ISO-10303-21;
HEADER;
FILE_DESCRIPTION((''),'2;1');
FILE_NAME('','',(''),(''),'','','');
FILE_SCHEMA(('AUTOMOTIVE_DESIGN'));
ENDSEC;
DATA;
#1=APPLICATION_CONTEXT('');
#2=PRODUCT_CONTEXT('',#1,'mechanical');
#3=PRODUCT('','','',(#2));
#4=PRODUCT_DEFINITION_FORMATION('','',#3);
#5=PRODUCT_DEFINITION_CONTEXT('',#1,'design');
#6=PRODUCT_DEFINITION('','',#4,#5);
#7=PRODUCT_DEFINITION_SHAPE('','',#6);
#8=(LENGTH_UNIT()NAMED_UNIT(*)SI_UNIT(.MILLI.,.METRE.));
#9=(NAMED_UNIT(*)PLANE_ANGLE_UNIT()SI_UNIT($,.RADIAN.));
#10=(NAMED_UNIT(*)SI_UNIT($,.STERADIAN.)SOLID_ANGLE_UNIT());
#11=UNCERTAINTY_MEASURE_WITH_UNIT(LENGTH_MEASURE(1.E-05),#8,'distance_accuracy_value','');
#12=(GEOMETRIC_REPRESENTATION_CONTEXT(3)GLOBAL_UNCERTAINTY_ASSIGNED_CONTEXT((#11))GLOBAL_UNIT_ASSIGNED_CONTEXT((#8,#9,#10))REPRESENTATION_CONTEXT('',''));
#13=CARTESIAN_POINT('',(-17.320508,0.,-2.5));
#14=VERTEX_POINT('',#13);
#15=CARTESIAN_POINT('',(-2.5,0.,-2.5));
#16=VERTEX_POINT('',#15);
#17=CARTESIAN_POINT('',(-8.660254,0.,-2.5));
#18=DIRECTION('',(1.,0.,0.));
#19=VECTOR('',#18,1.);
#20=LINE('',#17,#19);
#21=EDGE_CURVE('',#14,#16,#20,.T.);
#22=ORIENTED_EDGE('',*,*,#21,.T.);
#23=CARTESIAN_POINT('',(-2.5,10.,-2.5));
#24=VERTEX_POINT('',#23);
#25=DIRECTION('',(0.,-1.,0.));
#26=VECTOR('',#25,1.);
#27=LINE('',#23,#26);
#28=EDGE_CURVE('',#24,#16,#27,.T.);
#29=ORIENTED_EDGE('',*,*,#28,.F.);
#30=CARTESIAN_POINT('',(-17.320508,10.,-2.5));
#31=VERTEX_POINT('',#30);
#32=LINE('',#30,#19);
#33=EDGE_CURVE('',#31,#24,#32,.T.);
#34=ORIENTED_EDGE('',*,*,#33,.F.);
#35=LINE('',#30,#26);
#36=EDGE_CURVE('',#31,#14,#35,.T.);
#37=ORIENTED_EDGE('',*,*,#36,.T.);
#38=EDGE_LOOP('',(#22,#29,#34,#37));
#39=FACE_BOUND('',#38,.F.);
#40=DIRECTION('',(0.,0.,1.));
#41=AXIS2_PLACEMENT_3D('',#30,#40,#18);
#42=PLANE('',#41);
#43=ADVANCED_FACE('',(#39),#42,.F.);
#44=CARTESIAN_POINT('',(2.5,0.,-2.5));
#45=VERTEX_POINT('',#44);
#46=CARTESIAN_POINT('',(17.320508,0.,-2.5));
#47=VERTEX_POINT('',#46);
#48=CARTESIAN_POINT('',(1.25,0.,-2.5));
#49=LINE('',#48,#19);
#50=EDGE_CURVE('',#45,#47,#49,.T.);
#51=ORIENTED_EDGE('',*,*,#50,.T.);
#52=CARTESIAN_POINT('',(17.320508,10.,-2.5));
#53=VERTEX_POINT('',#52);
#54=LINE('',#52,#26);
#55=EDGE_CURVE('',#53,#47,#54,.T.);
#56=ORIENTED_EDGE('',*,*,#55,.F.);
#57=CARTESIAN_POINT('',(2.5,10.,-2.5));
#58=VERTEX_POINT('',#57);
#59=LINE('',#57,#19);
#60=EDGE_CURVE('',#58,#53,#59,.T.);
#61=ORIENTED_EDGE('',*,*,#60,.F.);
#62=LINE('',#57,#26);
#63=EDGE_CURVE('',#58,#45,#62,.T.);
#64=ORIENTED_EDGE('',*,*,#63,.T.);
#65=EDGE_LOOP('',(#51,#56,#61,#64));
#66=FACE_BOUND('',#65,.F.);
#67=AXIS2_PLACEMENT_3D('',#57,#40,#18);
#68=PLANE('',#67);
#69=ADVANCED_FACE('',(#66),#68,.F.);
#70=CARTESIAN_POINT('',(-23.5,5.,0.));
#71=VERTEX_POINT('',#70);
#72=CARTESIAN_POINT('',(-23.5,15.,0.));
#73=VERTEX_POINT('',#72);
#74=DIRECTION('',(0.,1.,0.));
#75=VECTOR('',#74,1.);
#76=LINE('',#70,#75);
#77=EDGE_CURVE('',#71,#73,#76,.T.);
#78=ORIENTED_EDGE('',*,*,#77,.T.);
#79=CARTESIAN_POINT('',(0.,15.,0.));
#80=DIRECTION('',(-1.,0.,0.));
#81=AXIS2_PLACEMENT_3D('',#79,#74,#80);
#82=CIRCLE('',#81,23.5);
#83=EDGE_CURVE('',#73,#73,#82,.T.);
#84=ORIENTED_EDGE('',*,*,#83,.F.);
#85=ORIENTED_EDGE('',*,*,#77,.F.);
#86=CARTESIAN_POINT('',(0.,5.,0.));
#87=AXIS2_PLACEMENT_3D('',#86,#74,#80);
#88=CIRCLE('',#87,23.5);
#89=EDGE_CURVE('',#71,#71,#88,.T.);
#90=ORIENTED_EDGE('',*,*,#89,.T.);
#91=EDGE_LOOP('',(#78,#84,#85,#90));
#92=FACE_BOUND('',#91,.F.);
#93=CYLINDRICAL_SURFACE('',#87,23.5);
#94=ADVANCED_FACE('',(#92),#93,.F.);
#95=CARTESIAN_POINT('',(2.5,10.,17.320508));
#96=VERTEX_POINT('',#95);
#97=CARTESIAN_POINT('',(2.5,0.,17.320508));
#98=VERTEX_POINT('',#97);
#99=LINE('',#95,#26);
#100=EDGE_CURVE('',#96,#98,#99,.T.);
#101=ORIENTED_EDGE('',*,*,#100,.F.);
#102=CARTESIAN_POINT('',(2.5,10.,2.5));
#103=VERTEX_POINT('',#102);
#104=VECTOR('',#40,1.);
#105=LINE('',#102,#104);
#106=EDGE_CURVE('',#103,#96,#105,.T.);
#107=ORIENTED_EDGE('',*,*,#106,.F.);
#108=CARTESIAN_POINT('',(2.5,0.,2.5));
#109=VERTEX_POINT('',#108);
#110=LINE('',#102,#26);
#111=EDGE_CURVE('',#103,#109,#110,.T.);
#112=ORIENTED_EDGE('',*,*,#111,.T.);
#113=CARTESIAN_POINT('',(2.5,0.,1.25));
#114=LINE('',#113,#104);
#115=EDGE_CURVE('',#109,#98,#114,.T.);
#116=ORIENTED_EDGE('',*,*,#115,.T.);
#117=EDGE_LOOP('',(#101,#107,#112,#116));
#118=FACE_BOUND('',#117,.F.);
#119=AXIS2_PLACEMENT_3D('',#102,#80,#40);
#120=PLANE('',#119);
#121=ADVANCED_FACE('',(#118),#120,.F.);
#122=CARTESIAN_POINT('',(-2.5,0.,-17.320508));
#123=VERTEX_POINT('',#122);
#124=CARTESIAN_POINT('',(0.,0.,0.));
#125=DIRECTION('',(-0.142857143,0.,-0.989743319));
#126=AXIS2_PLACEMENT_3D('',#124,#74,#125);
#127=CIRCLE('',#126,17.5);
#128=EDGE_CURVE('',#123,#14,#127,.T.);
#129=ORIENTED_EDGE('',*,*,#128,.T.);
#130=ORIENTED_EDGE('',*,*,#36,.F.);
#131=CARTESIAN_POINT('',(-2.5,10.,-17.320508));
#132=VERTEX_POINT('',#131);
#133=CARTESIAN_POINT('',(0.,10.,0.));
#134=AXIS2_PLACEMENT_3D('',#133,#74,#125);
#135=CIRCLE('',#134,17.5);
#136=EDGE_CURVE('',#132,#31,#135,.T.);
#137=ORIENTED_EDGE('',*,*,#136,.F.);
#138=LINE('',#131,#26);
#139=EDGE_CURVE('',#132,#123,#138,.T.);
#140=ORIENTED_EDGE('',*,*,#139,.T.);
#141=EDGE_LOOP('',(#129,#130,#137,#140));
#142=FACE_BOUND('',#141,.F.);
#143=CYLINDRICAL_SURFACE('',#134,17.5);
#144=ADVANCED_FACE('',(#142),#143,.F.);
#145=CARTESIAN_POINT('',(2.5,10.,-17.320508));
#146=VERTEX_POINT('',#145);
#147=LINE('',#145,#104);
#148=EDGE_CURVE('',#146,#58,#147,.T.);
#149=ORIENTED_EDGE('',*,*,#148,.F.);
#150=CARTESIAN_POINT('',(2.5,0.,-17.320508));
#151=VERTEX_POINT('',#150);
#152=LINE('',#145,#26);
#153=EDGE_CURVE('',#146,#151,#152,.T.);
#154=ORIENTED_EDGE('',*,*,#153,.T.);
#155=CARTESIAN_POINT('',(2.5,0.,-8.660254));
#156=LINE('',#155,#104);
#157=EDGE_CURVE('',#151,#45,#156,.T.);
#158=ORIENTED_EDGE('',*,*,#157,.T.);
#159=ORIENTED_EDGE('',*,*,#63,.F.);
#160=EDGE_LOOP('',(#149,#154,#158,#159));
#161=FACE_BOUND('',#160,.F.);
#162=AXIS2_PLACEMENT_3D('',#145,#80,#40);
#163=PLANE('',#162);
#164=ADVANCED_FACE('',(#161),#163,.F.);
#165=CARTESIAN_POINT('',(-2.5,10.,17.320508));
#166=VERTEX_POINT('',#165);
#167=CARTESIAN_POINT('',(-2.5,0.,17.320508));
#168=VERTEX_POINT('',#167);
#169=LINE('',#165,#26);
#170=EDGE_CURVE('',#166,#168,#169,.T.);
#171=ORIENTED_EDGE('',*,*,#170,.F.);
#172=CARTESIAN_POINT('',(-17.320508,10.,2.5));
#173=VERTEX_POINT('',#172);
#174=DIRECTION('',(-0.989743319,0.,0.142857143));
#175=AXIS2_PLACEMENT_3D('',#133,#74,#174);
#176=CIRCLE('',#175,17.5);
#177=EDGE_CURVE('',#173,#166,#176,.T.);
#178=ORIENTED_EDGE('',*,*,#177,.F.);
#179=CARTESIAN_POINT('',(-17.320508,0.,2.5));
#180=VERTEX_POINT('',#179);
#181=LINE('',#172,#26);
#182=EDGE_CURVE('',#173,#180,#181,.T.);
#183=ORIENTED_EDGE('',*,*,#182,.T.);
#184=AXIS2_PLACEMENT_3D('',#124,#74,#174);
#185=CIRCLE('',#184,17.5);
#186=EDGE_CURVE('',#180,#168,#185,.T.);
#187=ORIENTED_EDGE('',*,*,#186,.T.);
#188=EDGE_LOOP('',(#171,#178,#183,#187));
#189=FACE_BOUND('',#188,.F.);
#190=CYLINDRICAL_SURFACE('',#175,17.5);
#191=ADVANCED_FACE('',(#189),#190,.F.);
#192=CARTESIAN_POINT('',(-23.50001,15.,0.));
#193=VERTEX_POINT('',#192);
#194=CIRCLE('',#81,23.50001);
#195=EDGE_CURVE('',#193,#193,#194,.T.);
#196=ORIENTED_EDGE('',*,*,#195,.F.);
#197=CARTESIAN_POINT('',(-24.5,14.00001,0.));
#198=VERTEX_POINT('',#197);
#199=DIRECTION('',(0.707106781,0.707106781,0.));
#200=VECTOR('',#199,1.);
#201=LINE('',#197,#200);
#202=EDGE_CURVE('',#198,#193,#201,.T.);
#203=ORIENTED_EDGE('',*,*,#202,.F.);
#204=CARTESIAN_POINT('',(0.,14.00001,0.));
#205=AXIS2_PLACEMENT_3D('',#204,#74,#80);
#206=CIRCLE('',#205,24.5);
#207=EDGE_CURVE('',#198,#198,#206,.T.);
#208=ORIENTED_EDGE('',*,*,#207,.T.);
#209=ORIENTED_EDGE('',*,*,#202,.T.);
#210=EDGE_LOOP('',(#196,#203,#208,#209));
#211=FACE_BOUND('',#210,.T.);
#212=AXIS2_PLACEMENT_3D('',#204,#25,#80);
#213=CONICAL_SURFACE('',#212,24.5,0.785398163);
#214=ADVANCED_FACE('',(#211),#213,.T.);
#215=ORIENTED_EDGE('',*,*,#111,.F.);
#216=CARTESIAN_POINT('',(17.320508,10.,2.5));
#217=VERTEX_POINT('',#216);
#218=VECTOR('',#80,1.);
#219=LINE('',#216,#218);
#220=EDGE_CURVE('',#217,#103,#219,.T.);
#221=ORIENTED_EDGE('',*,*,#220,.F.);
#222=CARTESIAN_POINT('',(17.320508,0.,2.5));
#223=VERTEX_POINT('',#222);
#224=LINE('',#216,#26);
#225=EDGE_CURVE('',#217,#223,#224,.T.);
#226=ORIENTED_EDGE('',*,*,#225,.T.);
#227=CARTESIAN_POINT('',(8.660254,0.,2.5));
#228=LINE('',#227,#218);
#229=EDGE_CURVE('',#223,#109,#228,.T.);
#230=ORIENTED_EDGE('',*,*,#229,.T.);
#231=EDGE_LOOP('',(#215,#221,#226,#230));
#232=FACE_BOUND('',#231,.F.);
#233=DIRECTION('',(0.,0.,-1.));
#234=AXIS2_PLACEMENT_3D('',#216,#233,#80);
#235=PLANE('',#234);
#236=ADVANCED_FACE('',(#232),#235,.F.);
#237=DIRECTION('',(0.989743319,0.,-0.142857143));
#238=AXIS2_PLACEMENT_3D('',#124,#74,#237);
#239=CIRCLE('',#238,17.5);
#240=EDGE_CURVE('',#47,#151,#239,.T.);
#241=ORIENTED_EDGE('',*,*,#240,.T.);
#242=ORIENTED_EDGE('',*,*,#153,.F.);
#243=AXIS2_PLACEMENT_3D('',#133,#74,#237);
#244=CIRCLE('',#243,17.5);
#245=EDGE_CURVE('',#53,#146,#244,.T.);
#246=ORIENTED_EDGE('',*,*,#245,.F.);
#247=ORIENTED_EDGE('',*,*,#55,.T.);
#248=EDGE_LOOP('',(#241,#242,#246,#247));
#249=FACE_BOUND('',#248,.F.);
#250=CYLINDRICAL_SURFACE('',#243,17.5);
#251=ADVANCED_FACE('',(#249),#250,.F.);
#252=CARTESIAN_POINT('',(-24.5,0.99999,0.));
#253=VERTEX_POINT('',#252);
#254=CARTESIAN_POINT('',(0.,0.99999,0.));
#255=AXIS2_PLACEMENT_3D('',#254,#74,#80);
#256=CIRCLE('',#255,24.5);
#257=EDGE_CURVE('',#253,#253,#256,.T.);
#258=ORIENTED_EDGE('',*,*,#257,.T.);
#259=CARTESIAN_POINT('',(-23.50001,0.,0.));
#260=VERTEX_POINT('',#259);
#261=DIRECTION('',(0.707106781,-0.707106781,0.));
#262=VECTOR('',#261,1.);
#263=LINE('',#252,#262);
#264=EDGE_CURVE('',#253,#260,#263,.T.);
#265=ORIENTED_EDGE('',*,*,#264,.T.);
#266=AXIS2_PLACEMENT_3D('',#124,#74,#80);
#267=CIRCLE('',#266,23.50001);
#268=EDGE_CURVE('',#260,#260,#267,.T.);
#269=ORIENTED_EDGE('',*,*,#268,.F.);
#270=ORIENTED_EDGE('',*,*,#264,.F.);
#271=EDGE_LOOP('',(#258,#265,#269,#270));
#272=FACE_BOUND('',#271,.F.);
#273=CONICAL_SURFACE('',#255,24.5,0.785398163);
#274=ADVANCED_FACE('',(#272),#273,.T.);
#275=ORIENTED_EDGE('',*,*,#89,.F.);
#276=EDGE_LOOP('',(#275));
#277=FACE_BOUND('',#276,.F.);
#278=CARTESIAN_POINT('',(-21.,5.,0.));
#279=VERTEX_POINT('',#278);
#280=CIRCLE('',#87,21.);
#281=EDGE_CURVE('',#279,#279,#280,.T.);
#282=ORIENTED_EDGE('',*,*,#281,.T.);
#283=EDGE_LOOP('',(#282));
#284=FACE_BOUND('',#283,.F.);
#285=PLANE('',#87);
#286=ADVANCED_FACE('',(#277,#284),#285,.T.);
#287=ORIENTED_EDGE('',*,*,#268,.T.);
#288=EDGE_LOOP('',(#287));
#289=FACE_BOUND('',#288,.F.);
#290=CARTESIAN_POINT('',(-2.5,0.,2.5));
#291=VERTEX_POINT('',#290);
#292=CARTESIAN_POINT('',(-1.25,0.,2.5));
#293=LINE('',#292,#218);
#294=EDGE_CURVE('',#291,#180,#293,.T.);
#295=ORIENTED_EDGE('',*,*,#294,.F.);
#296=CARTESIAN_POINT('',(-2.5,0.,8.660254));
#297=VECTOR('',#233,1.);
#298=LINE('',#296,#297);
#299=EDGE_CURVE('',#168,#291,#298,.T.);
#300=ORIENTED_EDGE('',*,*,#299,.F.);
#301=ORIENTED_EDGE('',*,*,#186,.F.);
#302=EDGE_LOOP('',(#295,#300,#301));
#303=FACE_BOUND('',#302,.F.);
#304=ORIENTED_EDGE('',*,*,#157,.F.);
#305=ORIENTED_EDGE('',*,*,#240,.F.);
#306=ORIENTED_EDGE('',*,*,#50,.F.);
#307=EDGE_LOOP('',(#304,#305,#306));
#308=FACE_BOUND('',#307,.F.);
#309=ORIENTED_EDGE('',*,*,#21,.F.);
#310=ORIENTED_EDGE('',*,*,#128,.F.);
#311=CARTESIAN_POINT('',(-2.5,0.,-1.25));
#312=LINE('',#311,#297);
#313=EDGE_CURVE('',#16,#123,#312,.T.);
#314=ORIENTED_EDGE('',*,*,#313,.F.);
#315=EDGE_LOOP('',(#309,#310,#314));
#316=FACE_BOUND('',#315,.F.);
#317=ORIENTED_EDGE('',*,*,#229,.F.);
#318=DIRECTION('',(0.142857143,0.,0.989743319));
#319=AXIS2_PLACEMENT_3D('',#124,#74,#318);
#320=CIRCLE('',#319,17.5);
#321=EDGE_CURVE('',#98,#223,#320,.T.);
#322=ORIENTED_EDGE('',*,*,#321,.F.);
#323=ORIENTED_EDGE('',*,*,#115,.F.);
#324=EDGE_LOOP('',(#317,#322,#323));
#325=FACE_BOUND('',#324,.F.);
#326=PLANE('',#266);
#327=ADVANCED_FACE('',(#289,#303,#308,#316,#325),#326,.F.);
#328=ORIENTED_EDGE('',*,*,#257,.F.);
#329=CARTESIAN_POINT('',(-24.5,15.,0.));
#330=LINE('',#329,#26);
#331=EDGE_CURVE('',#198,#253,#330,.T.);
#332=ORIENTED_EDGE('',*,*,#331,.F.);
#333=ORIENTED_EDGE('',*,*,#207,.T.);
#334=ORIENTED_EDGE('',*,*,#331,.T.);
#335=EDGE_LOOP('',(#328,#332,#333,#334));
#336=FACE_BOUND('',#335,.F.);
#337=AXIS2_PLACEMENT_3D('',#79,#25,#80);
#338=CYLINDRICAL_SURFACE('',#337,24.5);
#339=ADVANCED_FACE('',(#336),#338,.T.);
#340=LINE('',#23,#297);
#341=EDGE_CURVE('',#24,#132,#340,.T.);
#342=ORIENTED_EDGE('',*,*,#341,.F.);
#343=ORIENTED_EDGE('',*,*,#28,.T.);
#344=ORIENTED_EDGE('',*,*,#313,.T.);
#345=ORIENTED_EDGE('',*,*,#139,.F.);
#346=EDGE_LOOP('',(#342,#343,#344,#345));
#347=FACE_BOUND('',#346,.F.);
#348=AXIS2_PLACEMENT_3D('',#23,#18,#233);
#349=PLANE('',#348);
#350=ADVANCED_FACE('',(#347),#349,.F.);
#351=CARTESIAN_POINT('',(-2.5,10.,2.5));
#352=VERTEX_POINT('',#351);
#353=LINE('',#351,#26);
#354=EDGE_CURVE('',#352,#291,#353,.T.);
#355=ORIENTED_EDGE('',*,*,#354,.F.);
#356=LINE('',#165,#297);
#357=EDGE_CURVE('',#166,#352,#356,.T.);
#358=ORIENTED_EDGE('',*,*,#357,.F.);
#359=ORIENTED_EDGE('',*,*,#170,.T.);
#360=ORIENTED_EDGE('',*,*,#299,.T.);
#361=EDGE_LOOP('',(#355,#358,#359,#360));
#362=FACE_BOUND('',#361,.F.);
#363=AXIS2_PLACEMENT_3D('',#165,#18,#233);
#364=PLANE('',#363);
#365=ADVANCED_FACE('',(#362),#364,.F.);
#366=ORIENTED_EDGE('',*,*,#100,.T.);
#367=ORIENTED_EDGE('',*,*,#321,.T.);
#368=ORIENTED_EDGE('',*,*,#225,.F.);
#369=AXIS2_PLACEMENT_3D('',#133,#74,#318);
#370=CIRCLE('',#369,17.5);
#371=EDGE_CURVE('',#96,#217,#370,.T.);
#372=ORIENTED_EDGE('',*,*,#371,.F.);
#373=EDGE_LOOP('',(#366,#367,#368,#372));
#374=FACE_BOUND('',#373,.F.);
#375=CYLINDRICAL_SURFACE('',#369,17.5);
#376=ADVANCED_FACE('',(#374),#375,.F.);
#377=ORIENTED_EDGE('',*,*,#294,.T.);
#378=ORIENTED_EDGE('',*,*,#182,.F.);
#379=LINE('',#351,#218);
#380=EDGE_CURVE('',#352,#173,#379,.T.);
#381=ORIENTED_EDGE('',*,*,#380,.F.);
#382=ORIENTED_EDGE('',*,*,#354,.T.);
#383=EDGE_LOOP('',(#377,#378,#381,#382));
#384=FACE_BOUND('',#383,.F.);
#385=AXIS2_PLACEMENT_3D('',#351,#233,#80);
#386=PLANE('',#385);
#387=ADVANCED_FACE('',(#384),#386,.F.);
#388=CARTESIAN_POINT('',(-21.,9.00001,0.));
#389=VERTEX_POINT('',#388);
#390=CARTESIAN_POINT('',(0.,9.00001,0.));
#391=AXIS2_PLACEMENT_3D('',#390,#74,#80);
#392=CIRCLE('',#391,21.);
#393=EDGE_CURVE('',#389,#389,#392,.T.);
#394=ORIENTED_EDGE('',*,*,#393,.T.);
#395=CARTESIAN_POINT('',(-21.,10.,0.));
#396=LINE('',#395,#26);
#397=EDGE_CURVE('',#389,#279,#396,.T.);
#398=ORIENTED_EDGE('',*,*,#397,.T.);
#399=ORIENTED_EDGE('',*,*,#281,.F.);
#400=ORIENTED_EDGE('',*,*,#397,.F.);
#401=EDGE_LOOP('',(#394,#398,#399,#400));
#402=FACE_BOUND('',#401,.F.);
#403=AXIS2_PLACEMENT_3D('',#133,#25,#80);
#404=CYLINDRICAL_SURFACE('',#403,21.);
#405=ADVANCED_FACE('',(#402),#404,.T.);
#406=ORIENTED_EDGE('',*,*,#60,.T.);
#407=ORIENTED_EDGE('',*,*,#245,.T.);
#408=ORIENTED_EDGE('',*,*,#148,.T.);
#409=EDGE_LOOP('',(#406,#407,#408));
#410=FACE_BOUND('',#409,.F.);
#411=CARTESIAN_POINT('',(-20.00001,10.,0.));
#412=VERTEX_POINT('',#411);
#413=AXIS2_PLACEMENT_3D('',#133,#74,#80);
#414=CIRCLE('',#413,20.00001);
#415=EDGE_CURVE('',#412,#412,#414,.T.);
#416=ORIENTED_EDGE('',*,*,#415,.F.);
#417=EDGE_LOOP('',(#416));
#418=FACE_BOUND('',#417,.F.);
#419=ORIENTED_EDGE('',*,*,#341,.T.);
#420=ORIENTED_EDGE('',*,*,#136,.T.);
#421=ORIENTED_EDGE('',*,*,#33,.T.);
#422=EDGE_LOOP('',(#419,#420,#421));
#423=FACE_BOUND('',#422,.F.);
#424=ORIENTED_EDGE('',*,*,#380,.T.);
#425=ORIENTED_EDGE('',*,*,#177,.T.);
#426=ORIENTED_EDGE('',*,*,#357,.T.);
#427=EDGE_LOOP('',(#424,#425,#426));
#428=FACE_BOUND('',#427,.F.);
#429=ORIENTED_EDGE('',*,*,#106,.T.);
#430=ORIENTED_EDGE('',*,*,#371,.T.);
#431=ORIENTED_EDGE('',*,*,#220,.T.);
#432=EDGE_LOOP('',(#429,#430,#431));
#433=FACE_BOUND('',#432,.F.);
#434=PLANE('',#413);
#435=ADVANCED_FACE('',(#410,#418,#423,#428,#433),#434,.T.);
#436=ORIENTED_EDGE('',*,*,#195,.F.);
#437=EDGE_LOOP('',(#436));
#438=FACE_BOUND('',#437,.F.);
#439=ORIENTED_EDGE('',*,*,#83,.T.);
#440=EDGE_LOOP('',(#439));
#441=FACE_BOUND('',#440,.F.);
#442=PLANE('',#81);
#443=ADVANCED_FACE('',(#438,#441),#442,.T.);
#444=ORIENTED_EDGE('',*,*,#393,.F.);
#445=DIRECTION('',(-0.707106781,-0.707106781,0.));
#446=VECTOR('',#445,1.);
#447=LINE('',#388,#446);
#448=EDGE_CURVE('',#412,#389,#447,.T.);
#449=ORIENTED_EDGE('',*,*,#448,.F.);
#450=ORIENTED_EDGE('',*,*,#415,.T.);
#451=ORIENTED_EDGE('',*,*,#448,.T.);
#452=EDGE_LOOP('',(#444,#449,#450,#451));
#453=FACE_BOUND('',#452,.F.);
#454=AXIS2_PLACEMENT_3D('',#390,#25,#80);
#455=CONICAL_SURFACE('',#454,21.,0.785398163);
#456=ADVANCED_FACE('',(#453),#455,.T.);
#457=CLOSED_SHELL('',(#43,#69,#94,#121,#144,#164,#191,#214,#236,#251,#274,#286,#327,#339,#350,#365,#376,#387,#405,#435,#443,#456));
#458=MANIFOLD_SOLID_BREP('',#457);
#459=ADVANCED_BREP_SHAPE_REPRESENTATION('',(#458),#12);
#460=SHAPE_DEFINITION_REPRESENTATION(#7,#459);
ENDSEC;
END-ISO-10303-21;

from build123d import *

# Parameters (mm, degrees)
F3_DEPTH = 25
F4_SIZE  = 0.99999


# Not quite as in the source:
# - a fillet or chamfer is up to 0.001 mm smaller than in the source, because OpenCascade refuses the exact size


with BuildPart() as f1:
    # F0 (on Top) → F1 (revolve)
    with BuildSketch(Plane.XY):
        Polygon((-24.5, 15), (-24.5, 0), (0, 0), (0, 10), (-21, 10), (-21, 5), (-23.5, 5), (-23.5, 15), align=None)
    revolve(axis=Axis((0, 1.7348257825, 0), (0, 1, 0)))

    # F2 (on face) → F3 (cut)
    with BuildSketch(Plane(origin=(0, 10, 0), x_dir=(-1, 0, 0), z_dir=(0, 1, 0))):
        with BuildLine():
            Line((-2.5, -2.5), (-17.3205080757, -2.5))
            ThreePointArc((-17.3205080757, -2.5), (-12.3743686708, -12.3743686708), (-2.5, -17.3205080757))
            Line((-2.5, -17.3205080757), (-2.5, -2.5))
        make_face()
        with BuildLine():
            ThreePointArc((17.3205080757, 2.5), (12.3743686708, 12.3743686708), (2.5, 17.3205080757))
            Line((2.5, 17.3205080757), (2.5, 2.5))
            Line((2.5, 2.5), (17.3205080757, 2.5))
        make_face()
        with BuildLine():
            Line((-2.5, 2.5), (-2.5, 17.3205080757))
            ThreePointArc((-2.5, 17.3205080757), (-12.3743686708, 12.3743686708), (-17.3205080757, 2.5))
            Line((-17.3205080757, 2.5), (-2.5, 2.5))
        make_face()
        with BuildLine():
            Line((17.3205080757, -2.5), (2.5, -2.5))
            Line((2.5, -2.5), (2.5, -17.3205080757))
            ThreePointArc((2.5, -17.3205080757), (12.3743686708, -12.3743686708), (17.3205080757, -2.5))
        make_face()
    extrude(amount=-F3_DEPTH, mode=Mode.SUBTRACT)

    # F4 (size 1 in the source; OpenCascade refuses exactly that, so slightly less here)
    f4_edges = [f1.edges().sort_by_distance(p)[0] for p in [
        (24.5, 0, 0),
        (24.5, 15, 0),
        (21, 10, 0),
    ]]
    chamfer(f4_edges, length=F4_SIZE)


solid = f1.part
